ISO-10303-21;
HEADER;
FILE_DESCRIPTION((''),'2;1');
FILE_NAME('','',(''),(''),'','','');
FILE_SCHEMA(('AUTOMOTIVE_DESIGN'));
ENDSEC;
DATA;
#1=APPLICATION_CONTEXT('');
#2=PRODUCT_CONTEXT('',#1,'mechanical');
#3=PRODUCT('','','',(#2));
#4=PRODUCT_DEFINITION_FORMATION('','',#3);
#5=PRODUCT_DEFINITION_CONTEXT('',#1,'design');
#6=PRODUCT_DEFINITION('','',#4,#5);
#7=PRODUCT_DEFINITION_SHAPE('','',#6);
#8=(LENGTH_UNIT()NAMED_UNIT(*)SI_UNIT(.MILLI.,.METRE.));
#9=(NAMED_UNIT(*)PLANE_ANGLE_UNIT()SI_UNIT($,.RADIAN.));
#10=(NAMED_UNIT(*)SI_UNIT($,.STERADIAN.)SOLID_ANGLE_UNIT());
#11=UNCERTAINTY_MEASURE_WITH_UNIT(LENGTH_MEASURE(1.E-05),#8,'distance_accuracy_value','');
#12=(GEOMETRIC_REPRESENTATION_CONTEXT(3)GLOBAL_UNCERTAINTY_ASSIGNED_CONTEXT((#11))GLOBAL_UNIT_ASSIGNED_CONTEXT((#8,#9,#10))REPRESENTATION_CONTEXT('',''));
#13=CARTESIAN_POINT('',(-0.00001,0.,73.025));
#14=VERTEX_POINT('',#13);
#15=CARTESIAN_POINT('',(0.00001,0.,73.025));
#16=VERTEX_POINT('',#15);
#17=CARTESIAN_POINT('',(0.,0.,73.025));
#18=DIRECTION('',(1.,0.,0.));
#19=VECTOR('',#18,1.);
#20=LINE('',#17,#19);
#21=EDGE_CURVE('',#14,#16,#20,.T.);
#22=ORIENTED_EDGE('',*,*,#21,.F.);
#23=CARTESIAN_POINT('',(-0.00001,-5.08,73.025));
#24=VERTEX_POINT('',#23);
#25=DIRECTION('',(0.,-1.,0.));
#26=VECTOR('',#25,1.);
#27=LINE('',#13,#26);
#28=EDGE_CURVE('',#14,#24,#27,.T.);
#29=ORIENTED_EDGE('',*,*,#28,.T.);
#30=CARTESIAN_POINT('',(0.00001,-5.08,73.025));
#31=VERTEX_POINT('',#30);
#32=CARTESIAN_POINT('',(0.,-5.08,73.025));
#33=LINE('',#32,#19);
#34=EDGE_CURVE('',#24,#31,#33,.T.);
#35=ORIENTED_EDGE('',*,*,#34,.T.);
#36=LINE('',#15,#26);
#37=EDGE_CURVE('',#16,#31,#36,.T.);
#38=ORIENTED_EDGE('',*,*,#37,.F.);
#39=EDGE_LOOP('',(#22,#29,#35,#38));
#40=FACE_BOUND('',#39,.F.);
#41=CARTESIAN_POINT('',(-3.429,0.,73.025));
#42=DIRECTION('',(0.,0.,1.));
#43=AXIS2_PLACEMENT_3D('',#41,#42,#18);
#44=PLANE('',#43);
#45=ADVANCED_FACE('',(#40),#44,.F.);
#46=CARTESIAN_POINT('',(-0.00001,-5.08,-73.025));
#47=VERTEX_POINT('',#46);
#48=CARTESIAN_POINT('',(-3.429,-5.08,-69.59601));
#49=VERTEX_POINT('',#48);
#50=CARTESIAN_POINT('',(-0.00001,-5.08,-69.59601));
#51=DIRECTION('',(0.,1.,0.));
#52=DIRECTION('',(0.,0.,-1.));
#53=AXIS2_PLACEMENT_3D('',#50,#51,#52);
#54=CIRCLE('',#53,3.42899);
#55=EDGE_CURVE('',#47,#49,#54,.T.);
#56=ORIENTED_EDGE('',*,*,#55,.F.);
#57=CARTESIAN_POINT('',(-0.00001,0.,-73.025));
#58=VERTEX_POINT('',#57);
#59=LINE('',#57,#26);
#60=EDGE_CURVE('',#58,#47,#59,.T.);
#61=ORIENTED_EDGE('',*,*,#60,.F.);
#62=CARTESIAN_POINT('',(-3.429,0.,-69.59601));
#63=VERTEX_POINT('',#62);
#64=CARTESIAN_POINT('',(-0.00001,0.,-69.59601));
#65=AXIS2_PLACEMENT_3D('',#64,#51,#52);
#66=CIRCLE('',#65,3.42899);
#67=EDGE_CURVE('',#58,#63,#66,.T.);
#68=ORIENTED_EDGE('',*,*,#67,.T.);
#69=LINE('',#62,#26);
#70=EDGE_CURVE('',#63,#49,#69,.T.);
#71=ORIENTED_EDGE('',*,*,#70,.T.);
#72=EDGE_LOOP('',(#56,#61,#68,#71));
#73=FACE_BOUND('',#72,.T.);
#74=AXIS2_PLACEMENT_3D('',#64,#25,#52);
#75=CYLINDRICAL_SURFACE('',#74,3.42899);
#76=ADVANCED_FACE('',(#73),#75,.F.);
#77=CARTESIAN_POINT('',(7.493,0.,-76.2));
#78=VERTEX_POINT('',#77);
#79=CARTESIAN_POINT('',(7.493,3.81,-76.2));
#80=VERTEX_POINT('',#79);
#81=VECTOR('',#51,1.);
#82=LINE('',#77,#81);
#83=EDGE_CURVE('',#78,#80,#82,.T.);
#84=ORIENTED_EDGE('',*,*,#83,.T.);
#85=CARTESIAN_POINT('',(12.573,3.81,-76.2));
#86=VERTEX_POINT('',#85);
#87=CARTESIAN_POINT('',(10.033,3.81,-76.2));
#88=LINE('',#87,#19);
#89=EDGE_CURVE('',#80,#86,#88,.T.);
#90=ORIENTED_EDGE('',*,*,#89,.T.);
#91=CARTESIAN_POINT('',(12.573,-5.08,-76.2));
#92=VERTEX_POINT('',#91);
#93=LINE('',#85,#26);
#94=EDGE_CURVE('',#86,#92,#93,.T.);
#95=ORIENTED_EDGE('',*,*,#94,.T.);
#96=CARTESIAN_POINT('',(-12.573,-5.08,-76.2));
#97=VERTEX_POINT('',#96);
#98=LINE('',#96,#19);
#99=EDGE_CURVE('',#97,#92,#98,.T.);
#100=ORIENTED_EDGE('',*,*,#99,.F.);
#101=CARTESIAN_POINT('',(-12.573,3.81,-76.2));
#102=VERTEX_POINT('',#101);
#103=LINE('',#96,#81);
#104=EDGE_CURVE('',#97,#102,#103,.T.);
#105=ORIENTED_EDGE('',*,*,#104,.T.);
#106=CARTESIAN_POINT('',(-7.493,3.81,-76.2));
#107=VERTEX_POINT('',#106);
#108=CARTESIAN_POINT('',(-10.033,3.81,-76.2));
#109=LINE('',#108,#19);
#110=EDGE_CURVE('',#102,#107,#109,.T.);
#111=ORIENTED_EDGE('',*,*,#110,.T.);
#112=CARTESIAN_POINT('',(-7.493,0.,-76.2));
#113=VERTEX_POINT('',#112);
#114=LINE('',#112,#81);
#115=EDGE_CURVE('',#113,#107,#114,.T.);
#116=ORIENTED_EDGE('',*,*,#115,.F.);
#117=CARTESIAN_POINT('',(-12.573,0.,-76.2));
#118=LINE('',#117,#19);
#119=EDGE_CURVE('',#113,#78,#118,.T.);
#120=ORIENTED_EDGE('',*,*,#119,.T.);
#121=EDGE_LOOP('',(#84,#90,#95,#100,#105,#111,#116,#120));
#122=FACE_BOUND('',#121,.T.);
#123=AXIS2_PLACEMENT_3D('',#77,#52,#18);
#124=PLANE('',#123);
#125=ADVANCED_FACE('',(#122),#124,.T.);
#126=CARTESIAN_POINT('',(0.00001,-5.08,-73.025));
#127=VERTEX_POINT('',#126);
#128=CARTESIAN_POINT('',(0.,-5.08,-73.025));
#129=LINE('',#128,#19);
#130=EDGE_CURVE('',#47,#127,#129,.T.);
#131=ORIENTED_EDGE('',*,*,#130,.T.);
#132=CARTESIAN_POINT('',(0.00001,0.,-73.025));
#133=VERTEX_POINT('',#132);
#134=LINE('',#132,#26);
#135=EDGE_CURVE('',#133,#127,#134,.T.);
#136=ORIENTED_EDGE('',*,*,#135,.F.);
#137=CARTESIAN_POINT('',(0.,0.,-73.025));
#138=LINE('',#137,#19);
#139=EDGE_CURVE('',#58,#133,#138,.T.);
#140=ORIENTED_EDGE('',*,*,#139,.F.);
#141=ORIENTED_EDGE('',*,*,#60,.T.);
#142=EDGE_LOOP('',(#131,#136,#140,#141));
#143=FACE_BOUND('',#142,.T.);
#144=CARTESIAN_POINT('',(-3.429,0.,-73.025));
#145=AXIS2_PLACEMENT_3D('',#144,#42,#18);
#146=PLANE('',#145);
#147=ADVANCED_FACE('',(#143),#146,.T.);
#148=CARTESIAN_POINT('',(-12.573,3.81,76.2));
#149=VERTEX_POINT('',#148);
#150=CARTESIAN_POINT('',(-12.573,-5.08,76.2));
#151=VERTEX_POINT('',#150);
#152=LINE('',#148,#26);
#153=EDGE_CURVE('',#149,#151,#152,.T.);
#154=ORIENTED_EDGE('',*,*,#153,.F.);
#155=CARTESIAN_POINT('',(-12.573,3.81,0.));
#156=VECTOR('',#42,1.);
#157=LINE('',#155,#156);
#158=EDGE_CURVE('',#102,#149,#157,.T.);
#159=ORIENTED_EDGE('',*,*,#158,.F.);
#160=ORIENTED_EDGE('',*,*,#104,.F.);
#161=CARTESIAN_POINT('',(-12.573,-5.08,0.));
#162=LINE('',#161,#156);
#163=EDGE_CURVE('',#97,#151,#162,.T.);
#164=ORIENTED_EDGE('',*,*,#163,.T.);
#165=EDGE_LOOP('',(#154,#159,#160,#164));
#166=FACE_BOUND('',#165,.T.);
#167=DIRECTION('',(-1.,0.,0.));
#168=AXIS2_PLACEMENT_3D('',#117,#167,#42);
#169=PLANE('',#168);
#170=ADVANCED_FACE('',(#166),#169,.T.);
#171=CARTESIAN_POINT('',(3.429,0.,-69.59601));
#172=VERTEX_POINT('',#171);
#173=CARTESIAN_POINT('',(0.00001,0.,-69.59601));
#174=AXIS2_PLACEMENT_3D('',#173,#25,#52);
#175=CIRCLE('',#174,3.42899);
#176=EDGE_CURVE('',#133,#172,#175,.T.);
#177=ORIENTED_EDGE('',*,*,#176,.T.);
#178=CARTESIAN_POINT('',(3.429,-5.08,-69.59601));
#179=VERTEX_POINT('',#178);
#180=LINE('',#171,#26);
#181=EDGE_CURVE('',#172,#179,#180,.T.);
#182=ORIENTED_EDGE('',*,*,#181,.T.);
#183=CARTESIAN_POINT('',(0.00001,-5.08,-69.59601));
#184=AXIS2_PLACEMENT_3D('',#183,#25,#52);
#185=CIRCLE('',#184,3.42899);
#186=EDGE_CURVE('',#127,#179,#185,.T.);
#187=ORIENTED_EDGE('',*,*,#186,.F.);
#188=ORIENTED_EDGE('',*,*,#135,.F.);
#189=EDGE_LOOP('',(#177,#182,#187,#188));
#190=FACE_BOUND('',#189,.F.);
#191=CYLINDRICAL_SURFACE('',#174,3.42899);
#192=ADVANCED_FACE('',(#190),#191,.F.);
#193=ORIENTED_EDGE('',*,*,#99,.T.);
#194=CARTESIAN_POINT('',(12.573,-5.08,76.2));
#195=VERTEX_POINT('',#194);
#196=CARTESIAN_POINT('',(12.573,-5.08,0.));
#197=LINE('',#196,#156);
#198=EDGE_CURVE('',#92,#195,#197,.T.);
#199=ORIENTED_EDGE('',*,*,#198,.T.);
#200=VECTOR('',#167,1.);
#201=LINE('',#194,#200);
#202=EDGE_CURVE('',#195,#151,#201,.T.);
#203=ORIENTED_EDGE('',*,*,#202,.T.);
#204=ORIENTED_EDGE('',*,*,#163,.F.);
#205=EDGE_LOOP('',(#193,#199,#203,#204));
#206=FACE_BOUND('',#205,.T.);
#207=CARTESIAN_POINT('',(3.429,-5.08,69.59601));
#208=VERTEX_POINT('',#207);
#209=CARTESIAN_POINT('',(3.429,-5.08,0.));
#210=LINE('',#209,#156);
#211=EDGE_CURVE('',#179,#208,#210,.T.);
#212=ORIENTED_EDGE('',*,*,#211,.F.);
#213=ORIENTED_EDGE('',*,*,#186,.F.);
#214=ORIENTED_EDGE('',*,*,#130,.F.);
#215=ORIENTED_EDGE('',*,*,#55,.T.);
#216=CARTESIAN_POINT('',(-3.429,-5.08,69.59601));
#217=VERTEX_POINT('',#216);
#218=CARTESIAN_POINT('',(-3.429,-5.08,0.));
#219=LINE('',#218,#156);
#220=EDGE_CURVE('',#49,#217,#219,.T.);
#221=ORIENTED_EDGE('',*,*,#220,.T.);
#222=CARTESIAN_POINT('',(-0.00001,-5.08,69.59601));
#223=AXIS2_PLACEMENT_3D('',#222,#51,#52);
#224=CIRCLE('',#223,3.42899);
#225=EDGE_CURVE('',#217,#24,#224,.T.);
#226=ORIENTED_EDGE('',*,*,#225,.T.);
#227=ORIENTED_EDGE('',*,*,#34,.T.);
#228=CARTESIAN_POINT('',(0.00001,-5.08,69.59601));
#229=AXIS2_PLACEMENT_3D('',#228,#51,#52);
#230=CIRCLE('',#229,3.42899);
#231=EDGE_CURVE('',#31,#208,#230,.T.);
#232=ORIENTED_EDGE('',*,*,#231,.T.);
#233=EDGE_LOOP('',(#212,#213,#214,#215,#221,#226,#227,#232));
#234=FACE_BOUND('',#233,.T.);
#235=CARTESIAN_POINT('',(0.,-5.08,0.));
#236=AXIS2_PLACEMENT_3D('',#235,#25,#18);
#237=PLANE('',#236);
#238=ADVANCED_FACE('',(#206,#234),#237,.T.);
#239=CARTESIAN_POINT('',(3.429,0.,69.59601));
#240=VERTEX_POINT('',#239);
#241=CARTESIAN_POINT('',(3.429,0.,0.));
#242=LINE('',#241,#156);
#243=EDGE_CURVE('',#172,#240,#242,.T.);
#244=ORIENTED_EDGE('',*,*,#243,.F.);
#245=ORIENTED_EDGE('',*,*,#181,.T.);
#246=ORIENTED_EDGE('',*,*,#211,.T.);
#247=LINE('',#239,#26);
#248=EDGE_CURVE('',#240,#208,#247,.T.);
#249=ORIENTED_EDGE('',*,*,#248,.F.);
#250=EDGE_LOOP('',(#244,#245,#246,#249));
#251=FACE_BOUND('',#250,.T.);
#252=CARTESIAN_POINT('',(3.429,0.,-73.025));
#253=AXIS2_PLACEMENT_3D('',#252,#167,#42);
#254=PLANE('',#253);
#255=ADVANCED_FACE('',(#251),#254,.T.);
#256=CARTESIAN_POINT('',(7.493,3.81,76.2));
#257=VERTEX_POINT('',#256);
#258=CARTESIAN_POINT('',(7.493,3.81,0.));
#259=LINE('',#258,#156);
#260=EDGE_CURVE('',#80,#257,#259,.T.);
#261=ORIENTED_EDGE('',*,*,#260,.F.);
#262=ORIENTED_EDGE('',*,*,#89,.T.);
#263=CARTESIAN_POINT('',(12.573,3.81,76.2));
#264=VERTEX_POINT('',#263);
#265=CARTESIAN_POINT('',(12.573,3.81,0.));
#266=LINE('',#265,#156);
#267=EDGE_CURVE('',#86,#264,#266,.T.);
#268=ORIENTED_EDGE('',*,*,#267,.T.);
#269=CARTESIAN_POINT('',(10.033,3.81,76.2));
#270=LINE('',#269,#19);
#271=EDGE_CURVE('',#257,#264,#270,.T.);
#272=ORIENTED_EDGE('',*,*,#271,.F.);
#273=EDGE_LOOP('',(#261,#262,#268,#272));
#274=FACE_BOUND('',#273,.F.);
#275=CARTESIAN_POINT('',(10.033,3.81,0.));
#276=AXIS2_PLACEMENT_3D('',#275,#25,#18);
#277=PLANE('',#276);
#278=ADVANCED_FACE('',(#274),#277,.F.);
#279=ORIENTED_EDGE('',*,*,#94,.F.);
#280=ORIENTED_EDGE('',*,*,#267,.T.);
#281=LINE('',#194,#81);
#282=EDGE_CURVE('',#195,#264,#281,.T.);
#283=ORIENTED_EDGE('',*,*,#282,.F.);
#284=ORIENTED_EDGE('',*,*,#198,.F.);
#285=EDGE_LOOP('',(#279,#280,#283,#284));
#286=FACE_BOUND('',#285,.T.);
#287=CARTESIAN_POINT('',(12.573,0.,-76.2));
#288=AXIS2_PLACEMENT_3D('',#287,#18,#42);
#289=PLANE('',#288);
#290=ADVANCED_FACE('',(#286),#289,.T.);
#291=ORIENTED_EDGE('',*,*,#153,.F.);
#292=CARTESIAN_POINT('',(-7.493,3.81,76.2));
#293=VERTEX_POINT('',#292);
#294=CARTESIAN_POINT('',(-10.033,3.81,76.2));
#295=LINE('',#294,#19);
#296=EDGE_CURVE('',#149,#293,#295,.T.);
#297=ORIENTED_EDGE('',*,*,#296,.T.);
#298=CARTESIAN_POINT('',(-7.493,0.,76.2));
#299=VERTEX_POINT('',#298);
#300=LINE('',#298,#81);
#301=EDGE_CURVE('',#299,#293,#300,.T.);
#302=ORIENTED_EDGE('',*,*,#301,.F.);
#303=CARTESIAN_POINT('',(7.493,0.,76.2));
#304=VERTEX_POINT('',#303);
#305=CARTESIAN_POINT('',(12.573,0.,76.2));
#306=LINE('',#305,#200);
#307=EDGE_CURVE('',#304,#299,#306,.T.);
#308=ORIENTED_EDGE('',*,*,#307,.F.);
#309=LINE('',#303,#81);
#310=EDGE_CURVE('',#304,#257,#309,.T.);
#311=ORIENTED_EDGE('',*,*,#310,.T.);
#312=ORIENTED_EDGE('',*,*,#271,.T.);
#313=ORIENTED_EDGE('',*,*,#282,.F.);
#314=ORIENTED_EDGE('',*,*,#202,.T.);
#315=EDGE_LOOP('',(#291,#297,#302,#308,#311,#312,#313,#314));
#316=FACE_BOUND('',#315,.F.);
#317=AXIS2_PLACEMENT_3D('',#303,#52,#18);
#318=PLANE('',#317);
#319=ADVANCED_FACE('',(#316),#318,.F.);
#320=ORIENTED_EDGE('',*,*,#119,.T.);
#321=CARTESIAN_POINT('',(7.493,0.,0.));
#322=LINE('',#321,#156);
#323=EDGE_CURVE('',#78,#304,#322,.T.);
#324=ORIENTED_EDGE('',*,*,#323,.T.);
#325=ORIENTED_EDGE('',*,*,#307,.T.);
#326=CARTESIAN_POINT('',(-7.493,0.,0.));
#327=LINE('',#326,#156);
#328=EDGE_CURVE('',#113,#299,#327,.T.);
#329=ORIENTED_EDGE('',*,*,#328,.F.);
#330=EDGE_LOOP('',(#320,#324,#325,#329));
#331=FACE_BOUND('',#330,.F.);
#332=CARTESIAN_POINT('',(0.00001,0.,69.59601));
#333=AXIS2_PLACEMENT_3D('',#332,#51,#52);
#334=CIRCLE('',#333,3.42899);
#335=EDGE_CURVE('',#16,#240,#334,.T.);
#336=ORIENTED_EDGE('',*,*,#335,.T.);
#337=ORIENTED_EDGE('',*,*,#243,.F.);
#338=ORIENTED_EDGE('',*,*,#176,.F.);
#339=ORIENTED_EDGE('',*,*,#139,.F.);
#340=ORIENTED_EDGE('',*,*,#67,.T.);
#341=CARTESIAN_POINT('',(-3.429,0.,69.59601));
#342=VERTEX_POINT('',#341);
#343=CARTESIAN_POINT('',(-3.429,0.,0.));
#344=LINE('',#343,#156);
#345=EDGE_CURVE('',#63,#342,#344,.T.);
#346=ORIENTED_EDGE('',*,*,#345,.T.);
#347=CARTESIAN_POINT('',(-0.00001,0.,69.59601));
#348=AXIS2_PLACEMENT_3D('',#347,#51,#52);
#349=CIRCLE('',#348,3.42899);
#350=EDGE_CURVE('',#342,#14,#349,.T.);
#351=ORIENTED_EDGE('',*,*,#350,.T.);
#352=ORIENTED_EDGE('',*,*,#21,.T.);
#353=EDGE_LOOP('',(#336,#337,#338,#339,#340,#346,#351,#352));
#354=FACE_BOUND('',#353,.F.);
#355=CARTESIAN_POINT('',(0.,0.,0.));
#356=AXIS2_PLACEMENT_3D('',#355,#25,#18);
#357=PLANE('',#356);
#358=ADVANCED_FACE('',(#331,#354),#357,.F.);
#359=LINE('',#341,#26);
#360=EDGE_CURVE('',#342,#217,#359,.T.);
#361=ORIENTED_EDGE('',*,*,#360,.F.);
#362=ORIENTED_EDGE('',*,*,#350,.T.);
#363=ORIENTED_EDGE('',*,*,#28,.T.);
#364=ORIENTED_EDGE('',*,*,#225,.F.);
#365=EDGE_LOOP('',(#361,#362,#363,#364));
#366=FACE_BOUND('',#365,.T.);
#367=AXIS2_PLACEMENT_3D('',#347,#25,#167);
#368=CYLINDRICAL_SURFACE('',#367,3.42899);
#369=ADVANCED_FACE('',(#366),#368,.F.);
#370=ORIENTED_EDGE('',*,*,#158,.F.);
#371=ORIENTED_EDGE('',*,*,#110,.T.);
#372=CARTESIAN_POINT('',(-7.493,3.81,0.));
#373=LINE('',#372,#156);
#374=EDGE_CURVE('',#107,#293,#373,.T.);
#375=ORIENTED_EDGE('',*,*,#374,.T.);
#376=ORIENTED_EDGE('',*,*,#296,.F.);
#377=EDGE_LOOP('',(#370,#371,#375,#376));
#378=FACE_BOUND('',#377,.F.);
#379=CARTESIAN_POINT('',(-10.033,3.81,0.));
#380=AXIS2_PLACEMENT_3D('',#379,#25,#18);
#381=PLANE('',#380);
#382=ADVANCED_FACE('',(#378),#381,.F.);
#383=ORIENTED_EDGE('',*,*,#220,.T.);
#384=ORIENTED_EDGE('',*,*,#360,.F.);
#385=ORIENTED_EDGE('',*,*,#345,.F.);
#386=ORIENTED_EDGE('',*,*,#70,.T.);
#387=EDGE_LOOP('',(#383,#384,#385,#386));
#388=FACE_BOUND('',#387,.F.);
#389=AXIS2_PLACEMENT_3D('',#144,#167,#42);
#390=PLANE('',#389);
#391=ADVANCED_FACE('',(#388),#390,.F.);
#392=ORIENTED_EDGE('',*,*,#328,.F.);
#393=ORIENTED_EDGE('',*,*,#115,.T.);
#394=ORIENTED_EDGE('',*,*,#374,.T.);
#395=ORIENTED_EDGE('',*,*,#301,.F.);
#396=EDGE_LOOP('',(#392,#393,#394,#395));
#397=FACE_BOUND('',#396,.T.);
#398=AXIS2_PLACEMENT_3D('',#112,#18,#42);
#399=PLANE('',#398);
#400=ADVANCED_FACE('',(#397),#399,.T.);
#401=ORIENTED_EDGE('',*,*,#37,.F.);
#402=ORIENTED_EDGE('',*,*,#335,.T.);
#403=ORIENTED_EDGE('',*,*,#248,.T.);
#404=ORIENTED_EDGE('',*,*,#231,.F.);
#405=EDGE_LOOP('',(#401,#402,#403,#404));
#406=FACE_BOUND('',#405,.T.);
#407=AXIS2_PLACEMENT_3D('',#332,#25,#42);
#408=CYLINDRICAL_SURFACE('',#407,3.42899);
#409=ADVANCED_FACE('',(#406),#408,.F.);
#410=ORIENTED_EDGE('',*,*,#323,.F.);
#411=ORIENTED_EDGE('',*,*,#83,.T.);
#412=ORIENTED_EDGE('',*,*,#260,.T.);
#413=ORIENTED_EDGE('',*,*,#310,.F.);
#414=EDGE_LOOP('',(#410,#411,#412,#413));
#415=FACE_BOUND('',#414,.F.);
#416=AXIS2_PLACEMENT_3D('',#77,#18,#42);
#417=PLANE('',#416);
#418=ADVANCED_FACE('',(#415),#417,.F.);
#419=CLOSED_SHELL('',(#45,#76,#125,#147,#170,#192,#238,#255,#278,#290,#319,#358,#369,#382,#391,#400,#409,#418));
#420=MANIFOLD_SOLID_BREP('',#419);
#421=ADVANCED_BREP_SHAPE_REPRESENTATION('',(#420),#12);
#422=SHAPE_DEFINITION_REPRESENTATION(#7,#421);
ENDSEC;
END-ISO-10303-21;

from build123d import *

# Parameters (mm, degrees)
F0_W     = 14.986
F0_H     = 152.4
F0_W_2   = 6.858
F0_H_2   = 146.05
F0_W_3   = 5.08
F1_DEPTH = 5.08
F2_R     = 3.42899
F3_DEPTH = 3.81


# Not quite as in the source:
# - a fillet or chamfer is up to 0.001 mm smaller than in the source, because OpenCascade refuses the exact size


with BuildPart() as f1:
    # F0 (on Front) → F1 (new body)
    with BuildSketch(Plane.XZ):
        Rectangle(F0_W, F0_H)
        Rectangle(F0_W_2, F0_H_2, mode=Mode.SUBTRACT)
        with Locations((-10.033, 0)):
            Rectangle(F0_W_3, F0_H)
        with Locations((10.033, 0)):
            Rectangle(F0_W_3, F0_H)
    extrude(amount=F1_DEPTH)

    # F2 (radius 3.429 in the source; OpenCascade refuses exactly that, so slightly less here)
    f2_edges = [f1.edges().sort_by_distance(p)[0] for p in [
        (3.429, -2.54, 73.025),
        (-3.429, -2.54, 73.025),
        (-3.429, -2.54, -73.025),
        (3.429, -2.54, -73.025),
    ]]
    fillet(f2_edges, radius=F2_R)

    # F0 (on Front) → F3 (join)
    with BuildSketch(Plane.XZ):
        with Locations((10.033, 0)):
            Rectangle(F0_W_3, F0_H)
        with Locations((-10.033, 0)):
            Rectangle(F0_W_3, F0_H)
    extrude(amount=-F3_DEPTH)


solid = f1.part
